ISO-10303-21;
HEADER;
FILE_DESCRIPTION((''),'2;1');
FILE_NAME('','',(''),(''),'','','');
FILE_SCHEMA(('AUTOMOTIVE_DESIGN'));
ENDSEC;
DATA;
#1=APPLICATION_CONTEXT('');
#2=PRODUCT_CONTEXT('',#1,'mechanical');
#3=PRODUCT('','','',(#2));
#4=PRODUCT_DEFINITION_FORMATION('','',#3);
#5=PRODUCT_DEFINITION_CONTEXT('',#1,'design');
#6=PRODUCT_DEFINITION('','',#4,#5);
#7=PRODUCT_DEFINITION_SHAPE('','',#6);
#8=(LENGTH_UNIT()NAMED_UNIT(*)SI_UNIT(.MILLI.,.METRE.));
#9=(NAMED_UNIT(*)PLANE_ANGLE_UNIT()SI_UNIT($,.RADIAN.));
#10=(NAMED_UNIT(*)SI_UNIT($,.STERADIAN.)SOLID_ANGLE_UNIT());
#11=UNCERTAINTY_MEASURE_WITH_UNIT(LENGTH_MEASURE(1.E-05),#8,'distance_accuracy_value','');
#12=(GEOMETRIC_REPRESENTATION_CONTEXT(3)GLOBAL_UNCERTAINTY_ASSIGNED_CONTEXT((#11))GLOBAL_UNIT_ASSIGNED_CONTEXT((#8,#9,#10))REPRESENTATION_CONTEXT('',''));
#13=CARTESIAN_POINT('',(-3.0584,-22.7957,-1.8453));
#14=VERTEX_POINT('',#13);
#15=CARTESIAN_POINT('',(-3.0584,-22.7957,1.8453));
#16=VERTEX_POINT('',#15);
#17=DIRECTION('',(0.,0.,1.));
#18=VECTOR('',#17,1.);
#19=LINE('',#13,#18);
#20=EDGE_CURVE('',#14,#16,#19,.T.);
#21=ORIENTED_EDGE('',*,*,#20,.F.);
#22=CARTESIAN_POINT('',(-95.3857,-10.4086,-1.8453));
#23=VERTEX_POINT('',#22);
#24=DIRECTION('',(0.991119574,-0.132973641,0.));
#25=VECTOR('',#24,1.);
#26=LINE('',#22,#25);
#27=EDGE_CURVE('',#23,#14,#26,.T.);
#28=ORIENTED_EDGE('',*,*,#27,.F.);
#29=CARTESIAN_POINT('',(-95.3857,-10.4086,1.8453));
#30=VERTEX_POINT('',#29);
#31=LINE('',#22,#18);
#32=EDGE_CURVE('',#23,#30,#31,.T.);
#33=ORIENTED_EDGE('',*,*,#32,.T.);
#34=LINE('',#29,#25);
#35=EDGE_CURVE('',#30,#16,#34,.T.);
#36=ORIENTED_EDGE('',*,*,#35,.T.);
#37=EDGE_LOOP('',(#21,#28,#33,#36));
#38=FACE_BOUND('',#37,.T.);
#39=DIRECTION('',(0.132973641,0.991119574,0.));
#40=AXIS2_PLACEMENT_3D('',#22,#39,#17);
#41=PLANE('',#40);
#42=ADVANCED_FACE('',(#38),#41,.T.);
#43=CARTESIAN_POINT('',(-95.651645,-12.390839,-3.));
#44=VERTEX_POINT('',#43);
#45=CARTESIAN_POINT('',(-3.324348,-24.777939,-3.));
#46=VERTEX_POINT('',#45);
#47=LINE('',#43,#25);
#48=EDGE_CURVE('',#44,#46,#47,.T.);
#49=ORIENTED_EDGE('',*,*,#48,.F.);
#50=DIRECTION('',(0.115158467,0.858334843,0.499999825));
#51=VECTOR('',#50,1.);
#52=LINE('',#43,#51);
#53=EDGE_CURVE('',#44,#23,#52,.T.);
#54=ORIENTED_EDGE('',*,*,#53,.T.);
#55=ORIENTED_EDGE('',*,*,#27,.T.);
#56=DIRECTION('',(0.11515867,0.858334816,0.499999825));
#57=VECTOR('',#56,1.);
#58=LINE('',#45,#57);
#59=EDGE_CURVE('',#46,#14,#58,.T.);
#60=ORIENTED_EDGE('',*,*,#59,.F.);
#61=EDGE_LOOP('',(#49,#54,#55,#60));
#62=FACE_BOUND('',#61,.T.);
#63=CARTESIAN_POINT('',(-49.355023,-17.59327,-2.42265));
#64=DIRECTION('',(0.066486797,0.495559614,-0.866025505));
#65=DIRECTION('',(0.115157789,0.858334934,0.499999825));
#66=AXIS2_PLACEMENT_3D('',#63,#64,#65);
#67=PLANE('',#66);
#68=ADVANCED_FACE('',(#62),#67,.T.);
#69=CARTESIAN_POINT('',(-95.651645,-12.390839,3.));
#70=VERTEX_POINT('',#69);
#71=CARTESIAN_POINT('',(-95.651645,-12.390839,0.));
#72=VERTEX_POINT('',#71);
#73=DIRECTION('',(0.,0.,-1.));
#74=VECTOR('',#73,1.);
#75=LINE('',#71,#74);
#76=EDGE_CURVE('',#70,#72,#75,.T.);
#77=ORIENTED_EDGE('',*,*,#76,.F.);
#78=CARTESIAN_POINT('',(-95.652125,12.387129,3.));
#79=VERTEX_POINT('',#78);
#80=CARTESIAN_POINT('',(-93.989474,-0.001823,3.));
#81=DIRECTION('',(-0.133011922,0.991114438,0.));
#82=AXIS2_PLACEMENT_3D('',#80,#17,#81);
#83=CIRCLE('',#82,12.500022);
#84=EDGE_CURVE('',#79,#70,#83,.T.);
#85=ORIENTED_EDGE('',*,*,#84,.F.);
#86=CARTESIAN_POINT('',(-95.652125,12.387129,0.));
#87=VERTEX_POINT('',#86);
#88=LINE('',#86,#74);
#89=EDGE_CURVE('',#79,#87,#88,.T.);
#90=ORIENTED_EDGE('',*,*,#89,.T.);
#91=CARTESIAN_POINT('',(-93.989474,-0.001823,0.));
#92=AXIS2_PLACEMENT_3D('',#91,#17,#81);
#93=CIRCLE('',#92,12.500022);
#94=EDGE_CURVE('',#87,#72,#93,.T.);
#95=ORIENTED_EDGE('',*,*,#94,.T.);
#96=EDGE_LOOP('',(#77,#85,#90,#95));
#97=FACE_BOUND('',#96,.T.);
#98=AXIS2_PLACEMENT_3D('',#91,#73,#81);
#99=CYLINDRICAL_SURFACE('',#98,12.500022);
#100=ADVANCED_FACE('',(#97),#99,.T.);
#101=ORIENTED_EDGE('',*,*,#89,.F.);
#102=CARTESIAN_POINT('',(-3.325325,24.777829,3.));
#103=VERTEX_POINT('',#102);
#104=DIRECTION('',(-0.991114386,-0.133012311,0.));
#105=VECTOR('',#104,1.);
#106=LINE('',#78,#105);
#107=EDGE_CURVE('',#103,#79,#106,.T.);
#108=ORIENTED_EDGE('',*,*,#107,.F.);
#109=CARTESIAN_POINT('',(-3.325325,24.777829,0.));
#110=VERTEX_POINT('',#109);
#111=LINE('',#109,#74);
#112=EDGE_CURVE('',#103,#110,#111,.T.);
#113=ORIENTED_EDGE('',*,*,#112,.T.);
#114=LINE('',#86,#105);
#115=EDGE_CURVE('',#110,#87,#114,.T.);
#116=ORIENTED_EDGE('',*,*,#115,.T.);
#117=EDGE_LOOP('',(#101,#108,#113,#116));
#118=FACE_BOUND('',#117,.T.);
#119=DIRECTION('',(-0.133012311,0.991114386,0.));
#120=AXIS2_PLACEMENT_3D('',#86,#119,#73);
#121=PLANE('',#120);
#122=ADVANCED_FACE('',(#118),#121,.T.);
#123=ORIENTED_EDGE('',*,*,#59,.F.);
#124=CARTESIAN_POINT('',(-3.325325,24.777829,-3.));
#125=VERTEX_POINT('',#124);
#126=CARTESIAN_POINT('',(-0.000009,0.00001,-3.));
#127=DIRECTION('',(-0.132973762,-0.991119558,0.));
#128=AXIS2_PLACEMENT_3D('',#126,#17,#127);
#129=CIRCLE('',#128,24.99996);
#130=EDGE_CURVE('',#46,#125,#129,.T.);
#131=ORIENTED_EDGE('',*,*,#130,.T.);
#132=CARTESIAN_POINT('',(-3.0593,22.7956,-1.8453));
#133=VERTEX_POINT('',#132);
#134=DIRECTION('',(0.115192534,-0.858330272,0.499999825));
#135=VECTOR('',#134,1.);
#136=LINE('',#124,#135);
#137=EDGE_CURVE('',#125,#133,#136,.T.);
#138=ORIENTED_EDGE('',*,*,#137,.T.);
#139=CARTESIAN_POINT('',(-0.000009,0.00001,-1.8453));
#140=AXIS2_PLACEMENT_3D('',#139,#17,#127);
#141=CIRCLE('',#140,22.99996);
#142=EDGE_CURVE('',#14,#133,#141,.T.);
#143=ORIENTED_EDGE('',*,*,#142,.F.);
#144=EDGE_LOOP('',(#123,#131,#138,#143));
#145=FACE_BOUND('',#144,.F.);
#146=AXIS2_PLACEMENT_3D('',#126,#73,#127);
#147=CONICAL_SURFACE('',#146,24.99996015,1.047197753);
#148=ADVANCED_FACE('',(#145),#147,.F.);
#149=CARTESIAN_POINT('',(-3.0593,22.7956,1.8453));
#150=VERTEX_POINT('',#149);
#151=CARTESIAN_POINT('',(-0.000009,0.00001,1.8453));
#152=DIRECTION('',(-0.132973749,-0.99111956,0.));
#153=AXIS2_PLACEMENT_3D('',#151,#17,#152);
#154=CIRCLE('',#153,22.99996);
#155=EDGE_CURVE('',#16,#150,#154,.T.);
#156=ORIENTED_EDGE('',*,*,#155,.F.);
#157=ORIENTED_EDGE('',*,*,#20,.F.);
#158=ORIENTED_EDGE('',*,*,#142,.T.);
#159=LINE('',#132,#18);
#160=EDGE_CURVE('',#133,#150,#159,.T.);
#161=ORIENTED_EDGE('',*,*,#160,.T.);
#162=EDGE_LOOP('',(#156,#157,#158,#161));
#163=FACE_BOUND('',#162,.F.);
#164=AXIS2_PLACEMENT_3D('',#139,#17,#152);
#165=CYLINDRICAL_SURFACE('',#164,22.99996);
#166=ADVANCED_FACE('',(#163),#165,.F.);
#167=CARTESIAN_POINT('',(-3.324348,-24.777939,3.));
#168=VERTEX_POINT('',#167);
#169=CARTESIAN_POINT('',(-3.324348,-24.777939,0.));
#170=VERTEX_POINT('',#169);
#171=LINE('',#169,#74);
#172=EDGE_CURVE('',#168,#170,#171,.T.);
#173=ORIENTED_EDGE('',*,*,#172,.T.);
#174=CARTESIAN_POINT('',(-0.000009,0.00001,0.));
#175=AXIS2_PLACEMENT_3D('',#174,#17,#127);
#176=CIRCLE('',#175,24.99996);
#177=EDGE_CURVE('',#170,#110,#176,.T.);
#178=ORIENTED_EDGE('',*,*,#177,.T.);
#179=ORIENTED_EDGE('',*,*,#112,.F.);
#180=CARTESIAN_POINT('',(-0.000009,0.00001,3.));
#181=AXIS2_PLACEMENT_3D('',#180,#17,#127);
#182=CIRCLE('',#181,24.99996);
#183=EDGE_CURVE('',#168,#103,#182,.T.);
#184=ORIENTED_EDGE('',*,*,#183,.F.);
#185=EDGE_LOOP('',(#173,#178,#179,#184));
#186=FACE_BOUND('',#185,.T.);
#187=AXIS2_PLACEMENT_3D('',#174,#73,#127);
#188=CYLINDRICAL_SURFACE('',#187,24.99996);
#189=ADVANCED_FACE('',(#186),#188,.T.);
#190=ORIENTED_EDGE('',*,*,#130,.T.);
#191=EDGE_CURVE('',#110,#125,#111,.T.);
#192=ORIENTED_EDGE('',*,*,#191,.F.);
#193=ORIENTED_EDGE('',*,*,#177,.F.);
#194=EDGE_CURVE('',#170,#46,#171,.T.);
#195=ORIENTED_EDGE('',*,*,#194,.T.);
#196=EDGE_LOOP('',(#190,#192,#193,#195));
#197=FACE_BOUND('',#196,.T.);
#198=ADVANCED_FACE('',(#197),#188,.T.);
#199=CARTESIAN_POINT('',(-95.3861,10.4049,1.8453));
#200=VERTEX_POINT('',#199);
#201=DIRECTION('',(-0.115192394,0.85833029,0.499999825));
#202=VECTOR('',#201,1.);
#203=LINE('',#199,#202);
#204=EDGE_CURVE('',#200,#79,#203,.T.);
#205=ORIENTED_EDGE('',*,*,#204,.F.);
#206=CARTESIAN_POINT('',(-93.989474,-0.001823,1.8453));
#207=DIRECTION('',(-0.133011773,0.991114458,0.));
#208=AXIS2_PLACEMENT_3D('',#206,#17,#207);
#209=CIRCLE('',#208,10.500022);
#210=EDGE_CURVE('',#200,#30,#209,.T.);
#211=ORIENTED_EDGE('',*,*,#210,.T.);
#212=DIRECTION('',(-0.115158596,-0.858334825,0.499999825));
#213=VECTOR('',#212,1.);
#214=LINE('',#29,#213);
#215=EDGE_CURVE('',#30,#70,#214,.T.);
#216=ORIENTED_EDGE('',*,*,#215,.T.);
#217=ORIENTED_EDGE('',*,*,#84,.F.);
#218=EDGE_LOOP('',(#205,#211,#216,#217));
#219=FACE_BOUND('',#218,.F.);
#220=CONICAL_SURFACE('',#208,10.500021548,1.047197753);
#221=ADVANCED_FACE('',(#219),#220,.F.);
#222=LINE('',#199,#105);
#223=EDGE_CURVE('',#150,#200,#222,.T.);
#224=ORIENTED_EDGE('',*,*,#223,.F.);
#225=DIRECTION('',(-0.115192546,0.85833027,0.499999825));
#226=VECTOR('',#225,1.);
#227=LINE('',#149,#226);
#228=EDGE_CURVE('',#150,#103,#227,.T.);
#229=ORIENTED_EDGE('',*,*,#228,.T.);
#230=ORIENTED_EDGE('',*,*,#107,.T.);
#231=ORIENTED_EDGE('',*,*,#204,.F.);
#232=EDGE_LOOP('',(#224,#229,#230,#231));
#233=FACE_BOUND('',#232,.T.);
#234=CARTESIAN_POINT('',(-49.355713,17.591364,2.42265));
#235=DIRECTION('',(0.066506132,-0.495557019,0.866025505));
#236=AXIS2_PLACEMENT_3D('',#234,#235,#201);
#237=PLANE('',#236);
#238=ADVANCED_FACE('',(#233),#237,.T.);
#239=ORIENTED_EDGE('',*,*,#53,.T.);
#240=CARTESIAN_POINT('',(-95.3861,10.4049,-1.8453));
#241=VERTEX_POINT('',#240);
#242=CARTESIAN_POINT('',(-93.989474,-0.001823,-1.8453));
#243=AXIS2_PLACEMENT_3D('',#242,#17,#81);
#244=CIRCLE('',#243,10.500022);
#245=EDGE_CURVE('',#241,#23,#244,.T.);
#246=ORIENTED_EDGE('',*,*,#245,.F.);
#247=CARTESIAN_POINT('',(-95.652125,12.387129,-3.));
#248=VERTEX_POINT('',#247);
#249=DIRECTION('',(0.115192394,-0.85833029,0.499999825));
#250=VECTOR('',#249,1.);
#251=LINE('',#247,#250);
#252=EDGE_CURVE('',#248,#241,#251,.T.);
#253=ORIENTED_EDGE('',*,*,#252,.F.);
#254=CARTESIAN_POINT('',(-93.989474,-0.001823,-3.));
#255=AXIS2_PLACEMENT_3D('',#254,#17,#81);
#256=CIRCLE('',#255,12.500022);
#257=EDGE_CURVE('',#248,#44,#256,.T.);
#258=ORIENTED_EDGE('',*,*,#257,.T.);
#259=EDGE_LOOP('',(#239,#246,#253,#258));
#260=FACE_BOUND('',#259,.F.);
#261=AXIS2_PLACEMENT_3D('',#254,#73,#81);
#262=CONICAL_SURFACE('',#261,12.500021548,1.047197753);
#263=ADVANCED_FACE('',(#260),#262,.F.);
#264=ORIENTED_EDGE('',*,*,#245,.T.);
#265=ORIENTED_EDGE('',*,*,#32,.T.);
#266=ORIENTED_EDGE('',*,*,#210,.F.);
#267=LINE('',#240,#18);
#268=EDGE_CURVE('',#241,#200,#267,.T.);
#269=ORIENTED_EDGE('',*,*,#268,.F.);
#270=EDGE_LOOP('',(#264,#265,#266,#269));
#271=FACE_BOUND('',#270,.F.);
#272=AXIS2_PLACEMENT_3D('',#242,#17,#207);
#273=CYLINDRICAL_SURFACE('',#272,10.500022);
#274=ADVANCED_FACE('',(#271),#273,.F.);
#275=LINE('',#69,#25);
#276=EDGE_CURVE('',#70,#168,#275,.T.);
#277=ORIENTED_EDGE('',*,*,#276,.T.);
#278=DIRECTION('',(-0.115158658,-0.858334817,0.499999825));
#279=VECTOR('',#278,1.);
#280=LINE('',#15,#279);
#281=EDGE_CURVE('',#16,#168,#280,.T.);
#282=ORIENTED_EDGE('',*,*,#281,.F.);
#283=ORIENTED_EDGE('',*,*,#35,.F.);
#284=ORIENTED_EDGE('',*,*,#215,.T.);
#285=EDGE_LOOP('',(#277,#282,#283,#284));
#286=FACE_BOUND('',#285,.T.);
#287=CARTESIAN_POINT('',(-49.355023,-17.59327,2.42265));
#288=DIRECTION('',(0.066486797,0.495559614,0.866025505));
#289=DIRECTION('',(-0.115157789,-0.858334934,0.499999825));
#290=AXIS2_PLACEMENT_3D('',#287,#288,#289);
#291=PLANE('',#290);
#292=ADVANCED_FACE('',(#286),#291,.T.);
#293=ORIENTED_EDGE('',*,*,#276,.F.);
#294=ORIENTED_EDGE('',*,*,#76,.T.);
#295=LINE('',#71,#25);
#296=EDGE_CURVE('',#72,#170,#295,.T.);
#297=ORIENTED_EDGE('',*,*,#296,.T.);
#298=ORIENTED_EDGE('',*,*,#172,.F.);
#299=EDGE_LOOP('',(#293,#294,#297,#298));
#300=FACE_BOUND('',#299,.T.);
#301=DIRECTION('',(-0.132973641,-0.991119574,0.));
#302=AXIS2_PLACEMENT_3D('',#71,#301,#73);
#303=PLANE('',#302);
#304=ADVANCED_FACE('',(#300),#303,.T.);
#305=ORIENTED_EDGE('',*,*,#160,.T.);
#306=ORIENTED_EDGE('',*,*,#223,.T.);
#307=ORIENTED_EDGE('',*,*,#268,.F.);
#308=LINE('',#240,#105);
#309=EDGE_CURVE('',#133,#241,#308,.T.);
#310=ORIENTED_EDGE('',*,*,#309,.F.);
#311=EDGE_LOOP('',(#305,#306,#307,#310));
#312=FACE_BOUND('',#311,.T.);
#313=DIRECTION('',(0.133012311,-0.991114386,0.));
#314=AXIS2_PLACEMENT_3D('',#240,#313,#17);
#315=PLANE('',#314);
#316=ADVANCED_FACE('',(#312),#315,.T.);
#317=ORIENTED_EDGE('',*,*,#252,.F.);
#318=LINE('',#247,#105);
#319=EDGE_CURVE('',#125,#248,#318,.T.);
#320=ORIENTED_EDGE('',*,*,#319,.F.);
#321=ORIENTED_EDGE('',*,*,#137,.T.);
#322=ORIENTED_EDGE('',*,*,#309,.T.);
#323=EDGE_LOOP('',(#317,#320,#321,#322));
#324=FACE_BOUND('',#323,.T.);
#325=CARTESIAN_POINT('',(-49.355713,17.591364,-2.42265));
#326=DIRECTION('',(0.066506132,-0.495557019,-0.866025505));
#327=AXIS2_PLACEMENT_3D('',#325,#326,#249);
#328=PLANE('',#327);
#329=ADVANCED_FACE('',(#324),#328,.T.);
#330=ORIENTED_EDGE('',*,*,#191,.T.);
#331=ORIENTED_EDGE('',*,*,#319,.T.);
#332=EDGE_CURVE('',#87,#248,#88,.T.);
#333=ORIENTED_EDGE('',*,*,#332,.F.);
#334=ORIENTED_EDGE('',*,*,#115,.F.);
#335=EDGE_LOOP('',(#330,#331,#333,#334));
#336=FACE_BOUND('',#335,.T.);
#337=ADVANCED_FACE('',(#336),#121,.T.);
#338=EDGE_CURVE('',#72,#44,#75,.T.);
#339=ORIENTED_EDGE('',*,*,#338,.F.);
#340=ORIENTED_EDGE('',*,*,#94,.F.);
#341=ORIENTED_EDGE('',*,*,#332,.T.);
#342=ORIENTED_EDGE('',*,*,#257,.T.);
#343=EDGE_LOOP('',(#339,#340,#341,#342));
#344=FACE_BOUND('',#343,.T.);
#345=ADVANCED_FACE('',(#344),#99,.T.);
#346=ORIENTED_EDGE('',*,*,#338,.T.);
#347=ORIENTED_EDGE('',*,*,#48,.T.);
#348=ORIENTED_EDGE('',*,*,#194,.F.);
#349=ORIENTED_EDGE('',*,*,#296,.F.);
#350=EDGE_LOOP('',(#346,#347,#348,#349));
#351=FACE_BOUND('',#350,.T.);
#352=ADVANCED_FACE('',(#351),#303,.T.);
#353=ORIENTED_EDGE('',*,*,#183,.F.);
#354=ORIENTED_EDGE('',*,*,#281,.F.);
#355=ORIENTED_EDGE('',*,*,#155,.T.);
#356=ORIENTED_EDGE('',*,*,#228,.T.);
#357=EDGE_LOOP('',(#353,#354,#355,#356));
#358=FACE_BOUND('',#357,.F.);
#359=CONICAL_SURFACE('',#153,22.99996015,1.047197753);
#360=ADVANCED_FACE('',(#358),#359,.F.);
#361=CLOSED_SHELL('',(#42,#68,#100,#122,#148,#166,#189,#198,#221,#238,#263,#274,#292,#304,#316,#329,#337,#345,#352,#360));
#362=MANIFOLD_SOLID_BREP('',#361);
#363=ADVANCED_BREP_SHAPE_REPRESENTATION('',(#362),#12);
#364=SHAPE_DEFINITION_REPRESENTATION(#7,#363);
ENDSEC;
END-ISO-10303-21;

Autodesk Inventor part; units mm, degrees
ref_plane "YZ Plane" through (0, 0, 0) normal (1, 0, 0) x (0, 1, 0)
ref_plane "XZ Plane" through (0, 0, 0) normal (0, 1, 0) x (-1, 0, 0)
sketch "Sketch1" plane through (0, 0, 0) normal (0, 0, 1) x (1, 0, 0)
  arc A0 (-3.0584, -22.7957) -> (-3.0593, 22.7956) centre (0, 0) ccw
  arc A1 (-95.3861, 10.4049) -> (-95.3857, -10.4086) centre (-93.9895, -0.0018) ccw
  line L0 (-95.3861, 10.4049) -> (-3.0593, 22.7956)
  line L1 (-95.3857, -10.4086) -> (-3.0584, -22.7957)
  dimension "d0" = 46
  dimension "d1" = 21
ref_plane "Work Plane1" through (-3.0593, 22.7956, 0) normal (-0.9911143, -0.1330127, 0) x (0.1330127, -0.9911143, 0)
sketch "Sketch2" plane through (-3.0593, 22.7956, 0) normal (-0.9911143, -0.1330127, 0) x (0.1330127, -0.9911143, 0)
  line L0 (-2, 0) -> (-2, 3)
  line L1 (-2, 0) -> (-2, -3)
  line L2 (-2, -3) -> (0, -1.8453)
  line L3 (0, -1.8453) -> (0, 1.8453)
  line L4 (0, 1.8453) -> (-2, 3)
  point P0 (23, 0)
  dimension "d4" = 3
  dimension "d5" = 3
  dimension "d6" = 60
  dimension "d7" = 60
  dimension "d8" = 2
sweep "Sweep1" add profiles "Sketch2" path "Sketch1"
properties part number "Dây đai"
